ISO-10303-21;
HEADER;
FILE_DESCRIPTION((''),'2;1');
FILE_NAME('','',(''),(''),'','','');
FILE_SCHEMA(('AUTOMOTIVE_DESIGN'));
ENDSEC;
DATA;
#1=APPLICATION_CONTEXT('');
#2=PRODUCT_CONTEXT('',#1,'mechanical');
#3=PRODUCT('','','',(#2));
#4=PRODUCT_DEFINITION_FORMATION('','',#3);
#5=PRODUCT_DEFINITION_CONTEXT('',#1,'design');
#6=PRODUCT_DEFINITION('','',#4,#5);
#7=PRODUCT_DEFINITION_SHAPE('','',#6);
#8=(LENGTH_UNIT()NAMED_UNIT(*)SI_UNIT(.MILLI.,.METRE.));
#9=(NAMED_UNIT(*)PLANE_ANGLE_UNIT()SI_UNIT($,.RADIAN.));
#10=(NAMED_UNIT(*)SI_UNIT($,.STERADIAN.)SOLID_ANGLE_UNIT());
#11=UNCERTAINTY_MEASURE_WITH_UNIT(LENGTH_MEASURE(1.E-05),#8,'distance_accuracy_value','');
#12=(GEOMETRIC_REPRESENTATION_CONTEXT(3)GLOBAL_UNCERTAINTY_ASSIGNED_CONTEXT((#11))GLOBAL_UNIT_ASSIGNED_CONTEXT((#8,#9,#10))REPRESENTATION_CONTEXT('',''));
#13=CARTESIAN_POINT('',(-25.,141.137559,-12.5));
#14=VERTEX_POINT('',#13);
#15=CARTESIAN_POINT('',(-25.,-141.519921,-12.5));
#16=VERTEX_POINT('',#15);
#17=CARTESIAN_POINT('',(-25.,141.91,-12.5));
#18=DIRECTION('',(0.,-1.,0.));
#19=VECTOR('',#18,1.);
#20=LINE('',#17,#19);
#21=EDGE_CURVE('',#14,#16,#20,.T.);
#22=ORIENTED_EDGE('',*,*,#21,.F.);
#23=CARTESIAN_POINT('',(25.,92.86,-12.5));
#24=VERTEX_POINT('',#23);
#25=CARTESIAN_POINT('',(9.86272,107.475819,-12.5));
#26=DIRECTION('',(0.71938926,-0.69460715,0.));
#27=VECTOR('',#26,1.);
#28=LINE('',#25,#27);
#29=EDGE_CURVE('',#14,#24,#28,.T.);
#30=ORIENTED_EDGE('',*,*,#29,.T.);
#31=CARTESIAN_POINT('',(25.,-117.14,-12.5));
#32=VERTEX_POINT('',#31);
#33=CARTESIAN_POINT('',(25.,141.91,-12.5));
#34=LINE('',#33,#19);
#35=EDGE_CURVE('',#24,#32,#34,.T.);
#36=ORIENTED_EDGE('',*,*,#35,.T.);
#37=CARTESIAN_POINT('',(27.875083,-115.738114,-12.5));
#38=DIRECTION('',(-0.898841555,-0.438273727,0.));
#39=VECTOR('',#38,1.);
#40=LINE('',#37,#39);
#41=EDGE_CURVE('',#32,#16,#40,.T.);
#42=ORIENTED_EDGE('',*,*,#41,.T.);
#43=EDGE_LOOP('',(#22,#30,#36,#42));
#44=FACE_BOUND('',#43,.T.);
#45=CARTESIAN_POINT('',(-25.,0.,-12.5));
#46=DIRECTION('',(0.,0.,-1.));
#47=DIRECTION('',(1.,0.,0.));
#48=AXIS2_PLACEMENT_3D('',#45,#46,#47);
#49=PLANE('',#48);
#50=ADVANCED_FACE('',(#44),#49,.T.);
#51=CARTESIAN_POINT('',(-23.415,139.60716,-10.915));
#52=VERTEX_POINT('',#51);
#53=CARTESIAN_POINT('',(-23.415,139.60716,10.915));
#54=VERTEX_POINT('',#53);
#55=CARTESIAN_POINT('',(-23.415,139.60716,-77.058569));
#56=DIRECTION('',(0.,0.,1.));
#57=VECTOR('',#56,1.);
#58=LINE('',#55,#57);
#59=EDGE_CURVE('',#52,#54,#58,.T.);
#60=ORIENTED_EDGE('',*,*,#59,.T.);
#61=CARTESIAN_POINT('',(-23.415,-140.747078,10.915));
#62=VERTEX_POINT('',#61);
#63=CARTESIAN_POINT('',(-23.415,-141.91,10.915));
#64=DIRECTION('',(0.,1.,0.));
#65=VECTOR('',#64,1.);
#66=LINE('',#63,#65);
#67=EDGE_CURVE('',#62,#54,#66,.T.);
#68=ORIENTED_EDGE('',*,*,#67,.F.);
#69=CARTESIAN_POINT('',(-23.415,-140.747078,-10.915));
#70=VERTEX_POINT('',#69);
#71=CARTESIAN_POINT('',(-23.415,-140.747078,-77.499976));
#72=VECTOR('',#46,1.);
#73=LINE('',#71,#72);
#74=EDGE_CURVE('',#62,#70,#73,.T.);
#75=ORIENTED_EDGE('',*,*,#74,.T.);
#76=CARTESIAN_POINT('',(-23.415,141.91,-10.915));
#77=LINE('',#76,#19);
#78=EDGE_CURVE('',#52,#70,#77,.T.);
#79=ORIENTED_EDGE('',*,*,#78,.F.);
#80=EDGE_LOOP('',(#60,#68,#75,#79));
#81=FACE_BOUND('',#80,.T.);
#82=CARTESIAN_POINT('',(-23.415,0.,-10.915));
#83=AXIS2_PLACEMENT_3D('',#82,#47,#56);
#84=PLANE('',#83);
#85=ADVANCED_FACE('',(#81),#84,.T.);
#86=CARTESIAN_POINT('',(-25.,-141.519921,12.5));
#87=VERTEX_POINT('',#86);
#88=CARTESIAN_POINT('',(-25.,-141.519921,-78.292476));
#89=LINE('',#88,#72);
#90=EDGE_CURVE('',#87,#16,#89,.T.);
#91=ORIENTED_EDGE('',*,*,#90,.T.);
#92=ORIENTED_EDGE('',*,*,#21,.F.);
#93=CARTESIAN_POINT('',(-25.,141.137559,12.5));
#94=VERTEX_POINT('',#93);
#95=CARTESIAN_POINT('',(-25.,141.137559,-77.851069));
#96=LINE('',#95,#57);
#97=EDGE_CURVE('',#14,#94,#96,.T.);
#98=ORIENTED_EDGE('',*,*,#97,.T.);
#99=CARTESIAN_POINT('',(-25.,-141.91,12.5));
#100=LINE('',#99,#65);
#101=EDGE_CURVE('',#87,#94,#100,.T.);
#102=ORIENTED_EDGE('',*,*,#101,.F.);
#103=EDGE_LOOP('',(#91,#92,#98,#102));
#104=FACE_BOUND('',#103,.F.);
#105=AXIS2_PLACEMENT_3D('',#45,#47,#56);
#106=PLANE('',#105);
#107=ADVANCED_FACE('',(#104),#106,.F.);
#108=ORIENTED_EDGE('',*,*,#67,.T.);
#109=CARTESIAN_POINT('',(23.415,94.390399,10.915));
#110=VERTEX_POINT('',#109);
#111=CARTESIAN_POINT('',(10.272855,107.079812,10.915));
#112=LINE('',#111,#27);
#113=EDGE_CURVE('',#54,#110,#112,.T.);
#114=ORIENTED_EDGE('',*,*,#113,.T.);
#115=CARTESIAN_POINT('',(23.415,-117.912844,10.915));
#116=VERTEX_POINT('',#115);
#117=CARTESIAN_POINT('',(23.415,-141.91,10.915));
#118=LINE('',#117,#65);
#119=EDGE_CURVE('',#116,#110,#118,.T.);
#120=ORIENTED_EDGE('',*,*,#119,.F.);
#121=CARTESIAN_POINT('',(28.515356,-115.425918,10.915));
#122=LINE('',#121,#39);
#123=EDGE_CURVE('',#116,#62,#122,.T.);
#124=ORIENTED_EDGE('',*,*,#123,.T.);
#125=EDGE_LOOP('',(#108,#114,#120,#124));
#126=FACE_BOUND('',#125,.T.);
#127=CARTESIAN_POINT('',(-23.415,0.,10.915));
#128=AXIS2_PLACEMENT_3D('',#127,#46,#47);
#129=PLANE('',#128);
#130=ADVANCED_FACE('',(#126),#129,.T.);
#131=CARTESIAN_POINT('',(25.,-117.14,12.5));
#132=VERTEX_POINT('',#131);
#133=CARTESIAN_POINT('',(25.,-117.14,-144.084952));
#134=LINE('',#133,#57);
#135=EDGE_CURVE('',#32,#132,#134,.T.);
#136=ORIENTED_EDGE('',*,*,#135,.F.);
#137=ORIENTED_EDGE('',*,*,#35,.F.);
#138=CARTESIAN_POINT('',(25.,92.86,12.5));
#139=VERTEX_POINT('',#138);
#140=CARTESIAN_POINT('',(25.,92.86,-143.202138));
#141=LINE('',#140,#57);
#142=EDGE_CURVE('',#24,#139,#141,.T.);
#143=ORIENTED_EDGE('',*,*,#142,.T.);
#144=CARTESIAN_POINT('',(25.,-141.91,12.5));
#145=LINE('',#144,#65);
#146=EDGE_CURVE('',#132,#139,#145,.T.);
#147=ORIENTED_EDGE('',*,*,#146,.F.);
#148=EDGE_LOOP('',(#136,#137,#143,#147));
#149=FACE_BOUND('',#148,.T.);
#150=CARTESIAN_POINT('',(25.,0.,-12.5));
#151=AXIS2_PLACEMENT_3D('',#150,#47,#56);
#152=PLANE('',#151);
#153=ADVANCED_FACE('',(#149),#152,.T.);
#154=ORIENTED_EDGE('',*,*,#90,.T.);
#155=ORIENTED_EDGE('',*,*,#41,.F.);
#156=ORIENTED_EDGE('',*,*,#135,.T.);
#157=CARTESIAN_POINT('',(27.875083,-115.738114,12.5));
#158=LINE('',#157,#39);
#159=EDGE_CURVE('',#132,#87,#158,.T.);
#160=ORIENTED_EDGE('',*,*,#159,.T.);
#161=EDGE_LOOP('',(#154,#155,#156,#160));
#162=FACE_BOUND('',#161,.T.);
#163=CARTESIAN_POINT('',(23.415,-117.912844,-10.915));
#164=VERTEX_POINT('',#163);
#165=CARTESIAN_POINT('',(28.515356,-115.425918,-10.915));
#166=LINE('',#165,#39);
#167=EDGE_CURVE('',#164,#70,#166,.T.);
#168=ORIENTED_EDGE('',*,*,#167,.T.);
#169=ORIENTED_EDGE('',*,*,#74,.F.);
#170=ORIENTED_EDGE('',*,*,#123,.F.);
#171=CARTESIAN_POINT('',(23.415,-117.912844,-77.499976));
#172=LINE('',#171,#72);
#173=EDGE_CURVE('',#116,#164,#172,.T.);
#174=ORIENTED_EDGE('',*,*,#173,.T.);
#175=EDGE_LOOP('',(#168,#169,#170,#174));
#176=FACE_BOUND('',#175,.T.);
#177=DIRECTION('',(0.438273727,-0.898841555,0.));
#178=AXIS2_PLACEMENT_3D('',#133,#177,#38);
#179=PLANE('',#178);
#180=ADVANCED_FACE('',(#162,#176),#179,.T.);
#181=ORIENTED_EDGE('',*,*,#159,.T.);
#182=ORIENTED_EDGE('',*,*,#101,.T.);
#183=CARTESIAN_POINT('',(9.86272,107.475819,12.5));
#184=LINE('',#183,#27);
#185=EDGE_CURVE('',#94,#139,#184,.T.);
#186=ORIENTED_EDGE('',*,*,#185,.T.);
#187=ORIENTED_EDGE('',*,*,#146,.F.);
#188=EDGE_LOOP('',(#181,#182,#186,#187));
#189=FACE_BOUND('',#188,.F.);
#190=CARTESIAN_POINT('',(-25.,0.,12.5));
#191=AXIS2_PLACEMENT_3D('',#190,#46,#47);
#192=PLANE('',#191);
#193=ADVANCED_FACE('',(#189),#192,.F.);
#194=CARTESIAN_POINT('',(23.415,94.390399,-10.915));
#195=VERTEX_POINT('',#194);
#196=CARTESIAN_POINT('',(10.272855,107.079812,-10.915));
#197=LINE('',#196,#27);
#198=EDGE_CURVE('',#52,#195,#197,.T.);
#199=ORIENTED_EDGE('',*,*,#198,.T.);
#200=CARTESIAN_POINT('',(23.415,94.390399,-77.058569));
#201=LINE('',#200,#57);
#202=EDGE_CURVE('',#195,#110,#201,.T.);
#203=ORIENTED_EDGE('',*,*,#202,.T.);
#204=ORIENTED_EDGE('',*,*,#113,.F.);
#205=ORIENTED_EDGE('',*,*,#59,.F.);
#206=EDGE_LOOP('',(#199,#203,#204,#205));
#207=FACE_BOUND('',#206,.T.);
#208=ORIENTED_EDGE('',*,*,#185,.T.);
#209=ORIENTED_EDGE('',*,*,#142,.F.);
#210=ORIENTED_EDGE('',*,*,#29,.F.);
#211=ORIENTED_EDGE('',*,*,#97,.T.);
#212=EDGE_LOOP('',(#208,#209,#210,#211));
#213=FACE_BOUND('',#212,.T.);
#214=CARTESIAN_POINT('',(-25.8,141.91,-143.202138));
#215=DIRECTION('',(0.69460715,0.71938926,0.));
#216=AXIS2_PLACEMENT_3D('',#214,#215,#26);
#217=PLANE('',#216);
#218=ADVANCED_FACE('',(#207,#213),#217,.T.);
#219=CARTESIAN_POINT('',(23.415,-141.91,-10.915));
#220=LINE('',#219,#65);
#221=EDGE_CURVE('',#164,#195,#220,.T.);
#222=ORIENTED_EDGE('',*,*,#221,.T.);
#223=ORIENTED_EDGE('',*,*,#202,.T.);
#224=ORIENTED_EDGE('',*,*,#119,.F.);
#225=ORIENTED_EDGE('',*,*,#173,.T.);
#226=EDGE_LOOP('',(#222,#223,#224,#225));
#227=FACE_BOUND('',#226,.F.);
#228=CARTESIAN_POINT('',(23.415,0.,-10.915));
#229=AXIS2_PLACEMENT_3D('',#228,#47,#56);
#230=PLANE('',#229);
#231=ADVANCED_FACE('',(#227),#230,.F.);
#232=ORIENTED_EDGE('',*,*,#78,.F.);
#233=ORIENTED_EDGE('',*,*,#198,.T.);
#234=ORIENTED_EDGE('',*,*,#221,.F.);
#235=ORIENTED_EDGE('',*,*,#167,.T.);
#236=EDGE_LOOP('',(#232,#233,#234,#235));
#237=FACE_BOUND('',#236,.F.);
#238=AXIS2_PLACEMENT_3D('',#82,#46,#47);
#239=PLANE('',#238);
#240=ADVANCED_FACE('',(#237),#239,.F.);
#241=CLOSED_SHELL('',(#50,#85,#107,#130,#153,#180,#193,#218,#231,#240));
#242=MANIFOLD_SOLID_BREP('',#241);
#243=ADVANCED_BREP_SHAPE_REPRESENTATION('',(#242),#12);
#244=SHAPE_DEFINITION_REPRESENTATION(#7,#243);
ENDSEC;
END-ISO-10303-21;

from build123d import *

# Parameters (mm, degrees)
F0_W        = 50
F0_H        = 25
F0_W_2      = 46.83
F0_H_2      = 21.83
F1_DEPTH    = 141.91
F2_T1_DEPTH = 288.1699043199
F3_T1_DEPTH = 286.404275023


# Not quite as in the source:
# - a fillet or chamfer that OpenCascade refuses, or shapes differently, is made with other operations: its cross-section is extruded or revolved along the edge and cut away or added


with BuildPart() as f1:
    # F0 (on Front) → F1 (new body, symmetric)
    with BuildSketch(Plane.XZ):
        Rectangle(F0_W, F0_H)
        Rectangle(F0_W_2, F0_H_2, mode=Mode.SUBTRACT)
    extrude(amount=F1_DEPTH, both=True)

    # F2: chamfer of 50.8 x 24.77 on 1 edges, made by hand

    # F2_s2 → F2_t1 (cut)
    with BuildSketch(Plane.XY.offset(-144.08495216)):
        Polygon((25, -117.14), (-25.8, -141.91), (25, -141.91), align=None)
    extrude(amount=F2_T1_DEPTH, mode=Mode.SUBTRACT)

    # F3: chamfer of 50.8 x 49.05 on 1 edges, made by hand

    # F3_s2 → F3_t1 (cut)
    with BuildSketch(Plane.XY.offset(-143.2021375115)):
        Polygon((-25.8, 141.91), (25, 92.86), (25, 141.91), align=None)
    extrude(amount=F3_T1_DEPTH, mode=Mode.SUBTRACT)


solid = f1.part
